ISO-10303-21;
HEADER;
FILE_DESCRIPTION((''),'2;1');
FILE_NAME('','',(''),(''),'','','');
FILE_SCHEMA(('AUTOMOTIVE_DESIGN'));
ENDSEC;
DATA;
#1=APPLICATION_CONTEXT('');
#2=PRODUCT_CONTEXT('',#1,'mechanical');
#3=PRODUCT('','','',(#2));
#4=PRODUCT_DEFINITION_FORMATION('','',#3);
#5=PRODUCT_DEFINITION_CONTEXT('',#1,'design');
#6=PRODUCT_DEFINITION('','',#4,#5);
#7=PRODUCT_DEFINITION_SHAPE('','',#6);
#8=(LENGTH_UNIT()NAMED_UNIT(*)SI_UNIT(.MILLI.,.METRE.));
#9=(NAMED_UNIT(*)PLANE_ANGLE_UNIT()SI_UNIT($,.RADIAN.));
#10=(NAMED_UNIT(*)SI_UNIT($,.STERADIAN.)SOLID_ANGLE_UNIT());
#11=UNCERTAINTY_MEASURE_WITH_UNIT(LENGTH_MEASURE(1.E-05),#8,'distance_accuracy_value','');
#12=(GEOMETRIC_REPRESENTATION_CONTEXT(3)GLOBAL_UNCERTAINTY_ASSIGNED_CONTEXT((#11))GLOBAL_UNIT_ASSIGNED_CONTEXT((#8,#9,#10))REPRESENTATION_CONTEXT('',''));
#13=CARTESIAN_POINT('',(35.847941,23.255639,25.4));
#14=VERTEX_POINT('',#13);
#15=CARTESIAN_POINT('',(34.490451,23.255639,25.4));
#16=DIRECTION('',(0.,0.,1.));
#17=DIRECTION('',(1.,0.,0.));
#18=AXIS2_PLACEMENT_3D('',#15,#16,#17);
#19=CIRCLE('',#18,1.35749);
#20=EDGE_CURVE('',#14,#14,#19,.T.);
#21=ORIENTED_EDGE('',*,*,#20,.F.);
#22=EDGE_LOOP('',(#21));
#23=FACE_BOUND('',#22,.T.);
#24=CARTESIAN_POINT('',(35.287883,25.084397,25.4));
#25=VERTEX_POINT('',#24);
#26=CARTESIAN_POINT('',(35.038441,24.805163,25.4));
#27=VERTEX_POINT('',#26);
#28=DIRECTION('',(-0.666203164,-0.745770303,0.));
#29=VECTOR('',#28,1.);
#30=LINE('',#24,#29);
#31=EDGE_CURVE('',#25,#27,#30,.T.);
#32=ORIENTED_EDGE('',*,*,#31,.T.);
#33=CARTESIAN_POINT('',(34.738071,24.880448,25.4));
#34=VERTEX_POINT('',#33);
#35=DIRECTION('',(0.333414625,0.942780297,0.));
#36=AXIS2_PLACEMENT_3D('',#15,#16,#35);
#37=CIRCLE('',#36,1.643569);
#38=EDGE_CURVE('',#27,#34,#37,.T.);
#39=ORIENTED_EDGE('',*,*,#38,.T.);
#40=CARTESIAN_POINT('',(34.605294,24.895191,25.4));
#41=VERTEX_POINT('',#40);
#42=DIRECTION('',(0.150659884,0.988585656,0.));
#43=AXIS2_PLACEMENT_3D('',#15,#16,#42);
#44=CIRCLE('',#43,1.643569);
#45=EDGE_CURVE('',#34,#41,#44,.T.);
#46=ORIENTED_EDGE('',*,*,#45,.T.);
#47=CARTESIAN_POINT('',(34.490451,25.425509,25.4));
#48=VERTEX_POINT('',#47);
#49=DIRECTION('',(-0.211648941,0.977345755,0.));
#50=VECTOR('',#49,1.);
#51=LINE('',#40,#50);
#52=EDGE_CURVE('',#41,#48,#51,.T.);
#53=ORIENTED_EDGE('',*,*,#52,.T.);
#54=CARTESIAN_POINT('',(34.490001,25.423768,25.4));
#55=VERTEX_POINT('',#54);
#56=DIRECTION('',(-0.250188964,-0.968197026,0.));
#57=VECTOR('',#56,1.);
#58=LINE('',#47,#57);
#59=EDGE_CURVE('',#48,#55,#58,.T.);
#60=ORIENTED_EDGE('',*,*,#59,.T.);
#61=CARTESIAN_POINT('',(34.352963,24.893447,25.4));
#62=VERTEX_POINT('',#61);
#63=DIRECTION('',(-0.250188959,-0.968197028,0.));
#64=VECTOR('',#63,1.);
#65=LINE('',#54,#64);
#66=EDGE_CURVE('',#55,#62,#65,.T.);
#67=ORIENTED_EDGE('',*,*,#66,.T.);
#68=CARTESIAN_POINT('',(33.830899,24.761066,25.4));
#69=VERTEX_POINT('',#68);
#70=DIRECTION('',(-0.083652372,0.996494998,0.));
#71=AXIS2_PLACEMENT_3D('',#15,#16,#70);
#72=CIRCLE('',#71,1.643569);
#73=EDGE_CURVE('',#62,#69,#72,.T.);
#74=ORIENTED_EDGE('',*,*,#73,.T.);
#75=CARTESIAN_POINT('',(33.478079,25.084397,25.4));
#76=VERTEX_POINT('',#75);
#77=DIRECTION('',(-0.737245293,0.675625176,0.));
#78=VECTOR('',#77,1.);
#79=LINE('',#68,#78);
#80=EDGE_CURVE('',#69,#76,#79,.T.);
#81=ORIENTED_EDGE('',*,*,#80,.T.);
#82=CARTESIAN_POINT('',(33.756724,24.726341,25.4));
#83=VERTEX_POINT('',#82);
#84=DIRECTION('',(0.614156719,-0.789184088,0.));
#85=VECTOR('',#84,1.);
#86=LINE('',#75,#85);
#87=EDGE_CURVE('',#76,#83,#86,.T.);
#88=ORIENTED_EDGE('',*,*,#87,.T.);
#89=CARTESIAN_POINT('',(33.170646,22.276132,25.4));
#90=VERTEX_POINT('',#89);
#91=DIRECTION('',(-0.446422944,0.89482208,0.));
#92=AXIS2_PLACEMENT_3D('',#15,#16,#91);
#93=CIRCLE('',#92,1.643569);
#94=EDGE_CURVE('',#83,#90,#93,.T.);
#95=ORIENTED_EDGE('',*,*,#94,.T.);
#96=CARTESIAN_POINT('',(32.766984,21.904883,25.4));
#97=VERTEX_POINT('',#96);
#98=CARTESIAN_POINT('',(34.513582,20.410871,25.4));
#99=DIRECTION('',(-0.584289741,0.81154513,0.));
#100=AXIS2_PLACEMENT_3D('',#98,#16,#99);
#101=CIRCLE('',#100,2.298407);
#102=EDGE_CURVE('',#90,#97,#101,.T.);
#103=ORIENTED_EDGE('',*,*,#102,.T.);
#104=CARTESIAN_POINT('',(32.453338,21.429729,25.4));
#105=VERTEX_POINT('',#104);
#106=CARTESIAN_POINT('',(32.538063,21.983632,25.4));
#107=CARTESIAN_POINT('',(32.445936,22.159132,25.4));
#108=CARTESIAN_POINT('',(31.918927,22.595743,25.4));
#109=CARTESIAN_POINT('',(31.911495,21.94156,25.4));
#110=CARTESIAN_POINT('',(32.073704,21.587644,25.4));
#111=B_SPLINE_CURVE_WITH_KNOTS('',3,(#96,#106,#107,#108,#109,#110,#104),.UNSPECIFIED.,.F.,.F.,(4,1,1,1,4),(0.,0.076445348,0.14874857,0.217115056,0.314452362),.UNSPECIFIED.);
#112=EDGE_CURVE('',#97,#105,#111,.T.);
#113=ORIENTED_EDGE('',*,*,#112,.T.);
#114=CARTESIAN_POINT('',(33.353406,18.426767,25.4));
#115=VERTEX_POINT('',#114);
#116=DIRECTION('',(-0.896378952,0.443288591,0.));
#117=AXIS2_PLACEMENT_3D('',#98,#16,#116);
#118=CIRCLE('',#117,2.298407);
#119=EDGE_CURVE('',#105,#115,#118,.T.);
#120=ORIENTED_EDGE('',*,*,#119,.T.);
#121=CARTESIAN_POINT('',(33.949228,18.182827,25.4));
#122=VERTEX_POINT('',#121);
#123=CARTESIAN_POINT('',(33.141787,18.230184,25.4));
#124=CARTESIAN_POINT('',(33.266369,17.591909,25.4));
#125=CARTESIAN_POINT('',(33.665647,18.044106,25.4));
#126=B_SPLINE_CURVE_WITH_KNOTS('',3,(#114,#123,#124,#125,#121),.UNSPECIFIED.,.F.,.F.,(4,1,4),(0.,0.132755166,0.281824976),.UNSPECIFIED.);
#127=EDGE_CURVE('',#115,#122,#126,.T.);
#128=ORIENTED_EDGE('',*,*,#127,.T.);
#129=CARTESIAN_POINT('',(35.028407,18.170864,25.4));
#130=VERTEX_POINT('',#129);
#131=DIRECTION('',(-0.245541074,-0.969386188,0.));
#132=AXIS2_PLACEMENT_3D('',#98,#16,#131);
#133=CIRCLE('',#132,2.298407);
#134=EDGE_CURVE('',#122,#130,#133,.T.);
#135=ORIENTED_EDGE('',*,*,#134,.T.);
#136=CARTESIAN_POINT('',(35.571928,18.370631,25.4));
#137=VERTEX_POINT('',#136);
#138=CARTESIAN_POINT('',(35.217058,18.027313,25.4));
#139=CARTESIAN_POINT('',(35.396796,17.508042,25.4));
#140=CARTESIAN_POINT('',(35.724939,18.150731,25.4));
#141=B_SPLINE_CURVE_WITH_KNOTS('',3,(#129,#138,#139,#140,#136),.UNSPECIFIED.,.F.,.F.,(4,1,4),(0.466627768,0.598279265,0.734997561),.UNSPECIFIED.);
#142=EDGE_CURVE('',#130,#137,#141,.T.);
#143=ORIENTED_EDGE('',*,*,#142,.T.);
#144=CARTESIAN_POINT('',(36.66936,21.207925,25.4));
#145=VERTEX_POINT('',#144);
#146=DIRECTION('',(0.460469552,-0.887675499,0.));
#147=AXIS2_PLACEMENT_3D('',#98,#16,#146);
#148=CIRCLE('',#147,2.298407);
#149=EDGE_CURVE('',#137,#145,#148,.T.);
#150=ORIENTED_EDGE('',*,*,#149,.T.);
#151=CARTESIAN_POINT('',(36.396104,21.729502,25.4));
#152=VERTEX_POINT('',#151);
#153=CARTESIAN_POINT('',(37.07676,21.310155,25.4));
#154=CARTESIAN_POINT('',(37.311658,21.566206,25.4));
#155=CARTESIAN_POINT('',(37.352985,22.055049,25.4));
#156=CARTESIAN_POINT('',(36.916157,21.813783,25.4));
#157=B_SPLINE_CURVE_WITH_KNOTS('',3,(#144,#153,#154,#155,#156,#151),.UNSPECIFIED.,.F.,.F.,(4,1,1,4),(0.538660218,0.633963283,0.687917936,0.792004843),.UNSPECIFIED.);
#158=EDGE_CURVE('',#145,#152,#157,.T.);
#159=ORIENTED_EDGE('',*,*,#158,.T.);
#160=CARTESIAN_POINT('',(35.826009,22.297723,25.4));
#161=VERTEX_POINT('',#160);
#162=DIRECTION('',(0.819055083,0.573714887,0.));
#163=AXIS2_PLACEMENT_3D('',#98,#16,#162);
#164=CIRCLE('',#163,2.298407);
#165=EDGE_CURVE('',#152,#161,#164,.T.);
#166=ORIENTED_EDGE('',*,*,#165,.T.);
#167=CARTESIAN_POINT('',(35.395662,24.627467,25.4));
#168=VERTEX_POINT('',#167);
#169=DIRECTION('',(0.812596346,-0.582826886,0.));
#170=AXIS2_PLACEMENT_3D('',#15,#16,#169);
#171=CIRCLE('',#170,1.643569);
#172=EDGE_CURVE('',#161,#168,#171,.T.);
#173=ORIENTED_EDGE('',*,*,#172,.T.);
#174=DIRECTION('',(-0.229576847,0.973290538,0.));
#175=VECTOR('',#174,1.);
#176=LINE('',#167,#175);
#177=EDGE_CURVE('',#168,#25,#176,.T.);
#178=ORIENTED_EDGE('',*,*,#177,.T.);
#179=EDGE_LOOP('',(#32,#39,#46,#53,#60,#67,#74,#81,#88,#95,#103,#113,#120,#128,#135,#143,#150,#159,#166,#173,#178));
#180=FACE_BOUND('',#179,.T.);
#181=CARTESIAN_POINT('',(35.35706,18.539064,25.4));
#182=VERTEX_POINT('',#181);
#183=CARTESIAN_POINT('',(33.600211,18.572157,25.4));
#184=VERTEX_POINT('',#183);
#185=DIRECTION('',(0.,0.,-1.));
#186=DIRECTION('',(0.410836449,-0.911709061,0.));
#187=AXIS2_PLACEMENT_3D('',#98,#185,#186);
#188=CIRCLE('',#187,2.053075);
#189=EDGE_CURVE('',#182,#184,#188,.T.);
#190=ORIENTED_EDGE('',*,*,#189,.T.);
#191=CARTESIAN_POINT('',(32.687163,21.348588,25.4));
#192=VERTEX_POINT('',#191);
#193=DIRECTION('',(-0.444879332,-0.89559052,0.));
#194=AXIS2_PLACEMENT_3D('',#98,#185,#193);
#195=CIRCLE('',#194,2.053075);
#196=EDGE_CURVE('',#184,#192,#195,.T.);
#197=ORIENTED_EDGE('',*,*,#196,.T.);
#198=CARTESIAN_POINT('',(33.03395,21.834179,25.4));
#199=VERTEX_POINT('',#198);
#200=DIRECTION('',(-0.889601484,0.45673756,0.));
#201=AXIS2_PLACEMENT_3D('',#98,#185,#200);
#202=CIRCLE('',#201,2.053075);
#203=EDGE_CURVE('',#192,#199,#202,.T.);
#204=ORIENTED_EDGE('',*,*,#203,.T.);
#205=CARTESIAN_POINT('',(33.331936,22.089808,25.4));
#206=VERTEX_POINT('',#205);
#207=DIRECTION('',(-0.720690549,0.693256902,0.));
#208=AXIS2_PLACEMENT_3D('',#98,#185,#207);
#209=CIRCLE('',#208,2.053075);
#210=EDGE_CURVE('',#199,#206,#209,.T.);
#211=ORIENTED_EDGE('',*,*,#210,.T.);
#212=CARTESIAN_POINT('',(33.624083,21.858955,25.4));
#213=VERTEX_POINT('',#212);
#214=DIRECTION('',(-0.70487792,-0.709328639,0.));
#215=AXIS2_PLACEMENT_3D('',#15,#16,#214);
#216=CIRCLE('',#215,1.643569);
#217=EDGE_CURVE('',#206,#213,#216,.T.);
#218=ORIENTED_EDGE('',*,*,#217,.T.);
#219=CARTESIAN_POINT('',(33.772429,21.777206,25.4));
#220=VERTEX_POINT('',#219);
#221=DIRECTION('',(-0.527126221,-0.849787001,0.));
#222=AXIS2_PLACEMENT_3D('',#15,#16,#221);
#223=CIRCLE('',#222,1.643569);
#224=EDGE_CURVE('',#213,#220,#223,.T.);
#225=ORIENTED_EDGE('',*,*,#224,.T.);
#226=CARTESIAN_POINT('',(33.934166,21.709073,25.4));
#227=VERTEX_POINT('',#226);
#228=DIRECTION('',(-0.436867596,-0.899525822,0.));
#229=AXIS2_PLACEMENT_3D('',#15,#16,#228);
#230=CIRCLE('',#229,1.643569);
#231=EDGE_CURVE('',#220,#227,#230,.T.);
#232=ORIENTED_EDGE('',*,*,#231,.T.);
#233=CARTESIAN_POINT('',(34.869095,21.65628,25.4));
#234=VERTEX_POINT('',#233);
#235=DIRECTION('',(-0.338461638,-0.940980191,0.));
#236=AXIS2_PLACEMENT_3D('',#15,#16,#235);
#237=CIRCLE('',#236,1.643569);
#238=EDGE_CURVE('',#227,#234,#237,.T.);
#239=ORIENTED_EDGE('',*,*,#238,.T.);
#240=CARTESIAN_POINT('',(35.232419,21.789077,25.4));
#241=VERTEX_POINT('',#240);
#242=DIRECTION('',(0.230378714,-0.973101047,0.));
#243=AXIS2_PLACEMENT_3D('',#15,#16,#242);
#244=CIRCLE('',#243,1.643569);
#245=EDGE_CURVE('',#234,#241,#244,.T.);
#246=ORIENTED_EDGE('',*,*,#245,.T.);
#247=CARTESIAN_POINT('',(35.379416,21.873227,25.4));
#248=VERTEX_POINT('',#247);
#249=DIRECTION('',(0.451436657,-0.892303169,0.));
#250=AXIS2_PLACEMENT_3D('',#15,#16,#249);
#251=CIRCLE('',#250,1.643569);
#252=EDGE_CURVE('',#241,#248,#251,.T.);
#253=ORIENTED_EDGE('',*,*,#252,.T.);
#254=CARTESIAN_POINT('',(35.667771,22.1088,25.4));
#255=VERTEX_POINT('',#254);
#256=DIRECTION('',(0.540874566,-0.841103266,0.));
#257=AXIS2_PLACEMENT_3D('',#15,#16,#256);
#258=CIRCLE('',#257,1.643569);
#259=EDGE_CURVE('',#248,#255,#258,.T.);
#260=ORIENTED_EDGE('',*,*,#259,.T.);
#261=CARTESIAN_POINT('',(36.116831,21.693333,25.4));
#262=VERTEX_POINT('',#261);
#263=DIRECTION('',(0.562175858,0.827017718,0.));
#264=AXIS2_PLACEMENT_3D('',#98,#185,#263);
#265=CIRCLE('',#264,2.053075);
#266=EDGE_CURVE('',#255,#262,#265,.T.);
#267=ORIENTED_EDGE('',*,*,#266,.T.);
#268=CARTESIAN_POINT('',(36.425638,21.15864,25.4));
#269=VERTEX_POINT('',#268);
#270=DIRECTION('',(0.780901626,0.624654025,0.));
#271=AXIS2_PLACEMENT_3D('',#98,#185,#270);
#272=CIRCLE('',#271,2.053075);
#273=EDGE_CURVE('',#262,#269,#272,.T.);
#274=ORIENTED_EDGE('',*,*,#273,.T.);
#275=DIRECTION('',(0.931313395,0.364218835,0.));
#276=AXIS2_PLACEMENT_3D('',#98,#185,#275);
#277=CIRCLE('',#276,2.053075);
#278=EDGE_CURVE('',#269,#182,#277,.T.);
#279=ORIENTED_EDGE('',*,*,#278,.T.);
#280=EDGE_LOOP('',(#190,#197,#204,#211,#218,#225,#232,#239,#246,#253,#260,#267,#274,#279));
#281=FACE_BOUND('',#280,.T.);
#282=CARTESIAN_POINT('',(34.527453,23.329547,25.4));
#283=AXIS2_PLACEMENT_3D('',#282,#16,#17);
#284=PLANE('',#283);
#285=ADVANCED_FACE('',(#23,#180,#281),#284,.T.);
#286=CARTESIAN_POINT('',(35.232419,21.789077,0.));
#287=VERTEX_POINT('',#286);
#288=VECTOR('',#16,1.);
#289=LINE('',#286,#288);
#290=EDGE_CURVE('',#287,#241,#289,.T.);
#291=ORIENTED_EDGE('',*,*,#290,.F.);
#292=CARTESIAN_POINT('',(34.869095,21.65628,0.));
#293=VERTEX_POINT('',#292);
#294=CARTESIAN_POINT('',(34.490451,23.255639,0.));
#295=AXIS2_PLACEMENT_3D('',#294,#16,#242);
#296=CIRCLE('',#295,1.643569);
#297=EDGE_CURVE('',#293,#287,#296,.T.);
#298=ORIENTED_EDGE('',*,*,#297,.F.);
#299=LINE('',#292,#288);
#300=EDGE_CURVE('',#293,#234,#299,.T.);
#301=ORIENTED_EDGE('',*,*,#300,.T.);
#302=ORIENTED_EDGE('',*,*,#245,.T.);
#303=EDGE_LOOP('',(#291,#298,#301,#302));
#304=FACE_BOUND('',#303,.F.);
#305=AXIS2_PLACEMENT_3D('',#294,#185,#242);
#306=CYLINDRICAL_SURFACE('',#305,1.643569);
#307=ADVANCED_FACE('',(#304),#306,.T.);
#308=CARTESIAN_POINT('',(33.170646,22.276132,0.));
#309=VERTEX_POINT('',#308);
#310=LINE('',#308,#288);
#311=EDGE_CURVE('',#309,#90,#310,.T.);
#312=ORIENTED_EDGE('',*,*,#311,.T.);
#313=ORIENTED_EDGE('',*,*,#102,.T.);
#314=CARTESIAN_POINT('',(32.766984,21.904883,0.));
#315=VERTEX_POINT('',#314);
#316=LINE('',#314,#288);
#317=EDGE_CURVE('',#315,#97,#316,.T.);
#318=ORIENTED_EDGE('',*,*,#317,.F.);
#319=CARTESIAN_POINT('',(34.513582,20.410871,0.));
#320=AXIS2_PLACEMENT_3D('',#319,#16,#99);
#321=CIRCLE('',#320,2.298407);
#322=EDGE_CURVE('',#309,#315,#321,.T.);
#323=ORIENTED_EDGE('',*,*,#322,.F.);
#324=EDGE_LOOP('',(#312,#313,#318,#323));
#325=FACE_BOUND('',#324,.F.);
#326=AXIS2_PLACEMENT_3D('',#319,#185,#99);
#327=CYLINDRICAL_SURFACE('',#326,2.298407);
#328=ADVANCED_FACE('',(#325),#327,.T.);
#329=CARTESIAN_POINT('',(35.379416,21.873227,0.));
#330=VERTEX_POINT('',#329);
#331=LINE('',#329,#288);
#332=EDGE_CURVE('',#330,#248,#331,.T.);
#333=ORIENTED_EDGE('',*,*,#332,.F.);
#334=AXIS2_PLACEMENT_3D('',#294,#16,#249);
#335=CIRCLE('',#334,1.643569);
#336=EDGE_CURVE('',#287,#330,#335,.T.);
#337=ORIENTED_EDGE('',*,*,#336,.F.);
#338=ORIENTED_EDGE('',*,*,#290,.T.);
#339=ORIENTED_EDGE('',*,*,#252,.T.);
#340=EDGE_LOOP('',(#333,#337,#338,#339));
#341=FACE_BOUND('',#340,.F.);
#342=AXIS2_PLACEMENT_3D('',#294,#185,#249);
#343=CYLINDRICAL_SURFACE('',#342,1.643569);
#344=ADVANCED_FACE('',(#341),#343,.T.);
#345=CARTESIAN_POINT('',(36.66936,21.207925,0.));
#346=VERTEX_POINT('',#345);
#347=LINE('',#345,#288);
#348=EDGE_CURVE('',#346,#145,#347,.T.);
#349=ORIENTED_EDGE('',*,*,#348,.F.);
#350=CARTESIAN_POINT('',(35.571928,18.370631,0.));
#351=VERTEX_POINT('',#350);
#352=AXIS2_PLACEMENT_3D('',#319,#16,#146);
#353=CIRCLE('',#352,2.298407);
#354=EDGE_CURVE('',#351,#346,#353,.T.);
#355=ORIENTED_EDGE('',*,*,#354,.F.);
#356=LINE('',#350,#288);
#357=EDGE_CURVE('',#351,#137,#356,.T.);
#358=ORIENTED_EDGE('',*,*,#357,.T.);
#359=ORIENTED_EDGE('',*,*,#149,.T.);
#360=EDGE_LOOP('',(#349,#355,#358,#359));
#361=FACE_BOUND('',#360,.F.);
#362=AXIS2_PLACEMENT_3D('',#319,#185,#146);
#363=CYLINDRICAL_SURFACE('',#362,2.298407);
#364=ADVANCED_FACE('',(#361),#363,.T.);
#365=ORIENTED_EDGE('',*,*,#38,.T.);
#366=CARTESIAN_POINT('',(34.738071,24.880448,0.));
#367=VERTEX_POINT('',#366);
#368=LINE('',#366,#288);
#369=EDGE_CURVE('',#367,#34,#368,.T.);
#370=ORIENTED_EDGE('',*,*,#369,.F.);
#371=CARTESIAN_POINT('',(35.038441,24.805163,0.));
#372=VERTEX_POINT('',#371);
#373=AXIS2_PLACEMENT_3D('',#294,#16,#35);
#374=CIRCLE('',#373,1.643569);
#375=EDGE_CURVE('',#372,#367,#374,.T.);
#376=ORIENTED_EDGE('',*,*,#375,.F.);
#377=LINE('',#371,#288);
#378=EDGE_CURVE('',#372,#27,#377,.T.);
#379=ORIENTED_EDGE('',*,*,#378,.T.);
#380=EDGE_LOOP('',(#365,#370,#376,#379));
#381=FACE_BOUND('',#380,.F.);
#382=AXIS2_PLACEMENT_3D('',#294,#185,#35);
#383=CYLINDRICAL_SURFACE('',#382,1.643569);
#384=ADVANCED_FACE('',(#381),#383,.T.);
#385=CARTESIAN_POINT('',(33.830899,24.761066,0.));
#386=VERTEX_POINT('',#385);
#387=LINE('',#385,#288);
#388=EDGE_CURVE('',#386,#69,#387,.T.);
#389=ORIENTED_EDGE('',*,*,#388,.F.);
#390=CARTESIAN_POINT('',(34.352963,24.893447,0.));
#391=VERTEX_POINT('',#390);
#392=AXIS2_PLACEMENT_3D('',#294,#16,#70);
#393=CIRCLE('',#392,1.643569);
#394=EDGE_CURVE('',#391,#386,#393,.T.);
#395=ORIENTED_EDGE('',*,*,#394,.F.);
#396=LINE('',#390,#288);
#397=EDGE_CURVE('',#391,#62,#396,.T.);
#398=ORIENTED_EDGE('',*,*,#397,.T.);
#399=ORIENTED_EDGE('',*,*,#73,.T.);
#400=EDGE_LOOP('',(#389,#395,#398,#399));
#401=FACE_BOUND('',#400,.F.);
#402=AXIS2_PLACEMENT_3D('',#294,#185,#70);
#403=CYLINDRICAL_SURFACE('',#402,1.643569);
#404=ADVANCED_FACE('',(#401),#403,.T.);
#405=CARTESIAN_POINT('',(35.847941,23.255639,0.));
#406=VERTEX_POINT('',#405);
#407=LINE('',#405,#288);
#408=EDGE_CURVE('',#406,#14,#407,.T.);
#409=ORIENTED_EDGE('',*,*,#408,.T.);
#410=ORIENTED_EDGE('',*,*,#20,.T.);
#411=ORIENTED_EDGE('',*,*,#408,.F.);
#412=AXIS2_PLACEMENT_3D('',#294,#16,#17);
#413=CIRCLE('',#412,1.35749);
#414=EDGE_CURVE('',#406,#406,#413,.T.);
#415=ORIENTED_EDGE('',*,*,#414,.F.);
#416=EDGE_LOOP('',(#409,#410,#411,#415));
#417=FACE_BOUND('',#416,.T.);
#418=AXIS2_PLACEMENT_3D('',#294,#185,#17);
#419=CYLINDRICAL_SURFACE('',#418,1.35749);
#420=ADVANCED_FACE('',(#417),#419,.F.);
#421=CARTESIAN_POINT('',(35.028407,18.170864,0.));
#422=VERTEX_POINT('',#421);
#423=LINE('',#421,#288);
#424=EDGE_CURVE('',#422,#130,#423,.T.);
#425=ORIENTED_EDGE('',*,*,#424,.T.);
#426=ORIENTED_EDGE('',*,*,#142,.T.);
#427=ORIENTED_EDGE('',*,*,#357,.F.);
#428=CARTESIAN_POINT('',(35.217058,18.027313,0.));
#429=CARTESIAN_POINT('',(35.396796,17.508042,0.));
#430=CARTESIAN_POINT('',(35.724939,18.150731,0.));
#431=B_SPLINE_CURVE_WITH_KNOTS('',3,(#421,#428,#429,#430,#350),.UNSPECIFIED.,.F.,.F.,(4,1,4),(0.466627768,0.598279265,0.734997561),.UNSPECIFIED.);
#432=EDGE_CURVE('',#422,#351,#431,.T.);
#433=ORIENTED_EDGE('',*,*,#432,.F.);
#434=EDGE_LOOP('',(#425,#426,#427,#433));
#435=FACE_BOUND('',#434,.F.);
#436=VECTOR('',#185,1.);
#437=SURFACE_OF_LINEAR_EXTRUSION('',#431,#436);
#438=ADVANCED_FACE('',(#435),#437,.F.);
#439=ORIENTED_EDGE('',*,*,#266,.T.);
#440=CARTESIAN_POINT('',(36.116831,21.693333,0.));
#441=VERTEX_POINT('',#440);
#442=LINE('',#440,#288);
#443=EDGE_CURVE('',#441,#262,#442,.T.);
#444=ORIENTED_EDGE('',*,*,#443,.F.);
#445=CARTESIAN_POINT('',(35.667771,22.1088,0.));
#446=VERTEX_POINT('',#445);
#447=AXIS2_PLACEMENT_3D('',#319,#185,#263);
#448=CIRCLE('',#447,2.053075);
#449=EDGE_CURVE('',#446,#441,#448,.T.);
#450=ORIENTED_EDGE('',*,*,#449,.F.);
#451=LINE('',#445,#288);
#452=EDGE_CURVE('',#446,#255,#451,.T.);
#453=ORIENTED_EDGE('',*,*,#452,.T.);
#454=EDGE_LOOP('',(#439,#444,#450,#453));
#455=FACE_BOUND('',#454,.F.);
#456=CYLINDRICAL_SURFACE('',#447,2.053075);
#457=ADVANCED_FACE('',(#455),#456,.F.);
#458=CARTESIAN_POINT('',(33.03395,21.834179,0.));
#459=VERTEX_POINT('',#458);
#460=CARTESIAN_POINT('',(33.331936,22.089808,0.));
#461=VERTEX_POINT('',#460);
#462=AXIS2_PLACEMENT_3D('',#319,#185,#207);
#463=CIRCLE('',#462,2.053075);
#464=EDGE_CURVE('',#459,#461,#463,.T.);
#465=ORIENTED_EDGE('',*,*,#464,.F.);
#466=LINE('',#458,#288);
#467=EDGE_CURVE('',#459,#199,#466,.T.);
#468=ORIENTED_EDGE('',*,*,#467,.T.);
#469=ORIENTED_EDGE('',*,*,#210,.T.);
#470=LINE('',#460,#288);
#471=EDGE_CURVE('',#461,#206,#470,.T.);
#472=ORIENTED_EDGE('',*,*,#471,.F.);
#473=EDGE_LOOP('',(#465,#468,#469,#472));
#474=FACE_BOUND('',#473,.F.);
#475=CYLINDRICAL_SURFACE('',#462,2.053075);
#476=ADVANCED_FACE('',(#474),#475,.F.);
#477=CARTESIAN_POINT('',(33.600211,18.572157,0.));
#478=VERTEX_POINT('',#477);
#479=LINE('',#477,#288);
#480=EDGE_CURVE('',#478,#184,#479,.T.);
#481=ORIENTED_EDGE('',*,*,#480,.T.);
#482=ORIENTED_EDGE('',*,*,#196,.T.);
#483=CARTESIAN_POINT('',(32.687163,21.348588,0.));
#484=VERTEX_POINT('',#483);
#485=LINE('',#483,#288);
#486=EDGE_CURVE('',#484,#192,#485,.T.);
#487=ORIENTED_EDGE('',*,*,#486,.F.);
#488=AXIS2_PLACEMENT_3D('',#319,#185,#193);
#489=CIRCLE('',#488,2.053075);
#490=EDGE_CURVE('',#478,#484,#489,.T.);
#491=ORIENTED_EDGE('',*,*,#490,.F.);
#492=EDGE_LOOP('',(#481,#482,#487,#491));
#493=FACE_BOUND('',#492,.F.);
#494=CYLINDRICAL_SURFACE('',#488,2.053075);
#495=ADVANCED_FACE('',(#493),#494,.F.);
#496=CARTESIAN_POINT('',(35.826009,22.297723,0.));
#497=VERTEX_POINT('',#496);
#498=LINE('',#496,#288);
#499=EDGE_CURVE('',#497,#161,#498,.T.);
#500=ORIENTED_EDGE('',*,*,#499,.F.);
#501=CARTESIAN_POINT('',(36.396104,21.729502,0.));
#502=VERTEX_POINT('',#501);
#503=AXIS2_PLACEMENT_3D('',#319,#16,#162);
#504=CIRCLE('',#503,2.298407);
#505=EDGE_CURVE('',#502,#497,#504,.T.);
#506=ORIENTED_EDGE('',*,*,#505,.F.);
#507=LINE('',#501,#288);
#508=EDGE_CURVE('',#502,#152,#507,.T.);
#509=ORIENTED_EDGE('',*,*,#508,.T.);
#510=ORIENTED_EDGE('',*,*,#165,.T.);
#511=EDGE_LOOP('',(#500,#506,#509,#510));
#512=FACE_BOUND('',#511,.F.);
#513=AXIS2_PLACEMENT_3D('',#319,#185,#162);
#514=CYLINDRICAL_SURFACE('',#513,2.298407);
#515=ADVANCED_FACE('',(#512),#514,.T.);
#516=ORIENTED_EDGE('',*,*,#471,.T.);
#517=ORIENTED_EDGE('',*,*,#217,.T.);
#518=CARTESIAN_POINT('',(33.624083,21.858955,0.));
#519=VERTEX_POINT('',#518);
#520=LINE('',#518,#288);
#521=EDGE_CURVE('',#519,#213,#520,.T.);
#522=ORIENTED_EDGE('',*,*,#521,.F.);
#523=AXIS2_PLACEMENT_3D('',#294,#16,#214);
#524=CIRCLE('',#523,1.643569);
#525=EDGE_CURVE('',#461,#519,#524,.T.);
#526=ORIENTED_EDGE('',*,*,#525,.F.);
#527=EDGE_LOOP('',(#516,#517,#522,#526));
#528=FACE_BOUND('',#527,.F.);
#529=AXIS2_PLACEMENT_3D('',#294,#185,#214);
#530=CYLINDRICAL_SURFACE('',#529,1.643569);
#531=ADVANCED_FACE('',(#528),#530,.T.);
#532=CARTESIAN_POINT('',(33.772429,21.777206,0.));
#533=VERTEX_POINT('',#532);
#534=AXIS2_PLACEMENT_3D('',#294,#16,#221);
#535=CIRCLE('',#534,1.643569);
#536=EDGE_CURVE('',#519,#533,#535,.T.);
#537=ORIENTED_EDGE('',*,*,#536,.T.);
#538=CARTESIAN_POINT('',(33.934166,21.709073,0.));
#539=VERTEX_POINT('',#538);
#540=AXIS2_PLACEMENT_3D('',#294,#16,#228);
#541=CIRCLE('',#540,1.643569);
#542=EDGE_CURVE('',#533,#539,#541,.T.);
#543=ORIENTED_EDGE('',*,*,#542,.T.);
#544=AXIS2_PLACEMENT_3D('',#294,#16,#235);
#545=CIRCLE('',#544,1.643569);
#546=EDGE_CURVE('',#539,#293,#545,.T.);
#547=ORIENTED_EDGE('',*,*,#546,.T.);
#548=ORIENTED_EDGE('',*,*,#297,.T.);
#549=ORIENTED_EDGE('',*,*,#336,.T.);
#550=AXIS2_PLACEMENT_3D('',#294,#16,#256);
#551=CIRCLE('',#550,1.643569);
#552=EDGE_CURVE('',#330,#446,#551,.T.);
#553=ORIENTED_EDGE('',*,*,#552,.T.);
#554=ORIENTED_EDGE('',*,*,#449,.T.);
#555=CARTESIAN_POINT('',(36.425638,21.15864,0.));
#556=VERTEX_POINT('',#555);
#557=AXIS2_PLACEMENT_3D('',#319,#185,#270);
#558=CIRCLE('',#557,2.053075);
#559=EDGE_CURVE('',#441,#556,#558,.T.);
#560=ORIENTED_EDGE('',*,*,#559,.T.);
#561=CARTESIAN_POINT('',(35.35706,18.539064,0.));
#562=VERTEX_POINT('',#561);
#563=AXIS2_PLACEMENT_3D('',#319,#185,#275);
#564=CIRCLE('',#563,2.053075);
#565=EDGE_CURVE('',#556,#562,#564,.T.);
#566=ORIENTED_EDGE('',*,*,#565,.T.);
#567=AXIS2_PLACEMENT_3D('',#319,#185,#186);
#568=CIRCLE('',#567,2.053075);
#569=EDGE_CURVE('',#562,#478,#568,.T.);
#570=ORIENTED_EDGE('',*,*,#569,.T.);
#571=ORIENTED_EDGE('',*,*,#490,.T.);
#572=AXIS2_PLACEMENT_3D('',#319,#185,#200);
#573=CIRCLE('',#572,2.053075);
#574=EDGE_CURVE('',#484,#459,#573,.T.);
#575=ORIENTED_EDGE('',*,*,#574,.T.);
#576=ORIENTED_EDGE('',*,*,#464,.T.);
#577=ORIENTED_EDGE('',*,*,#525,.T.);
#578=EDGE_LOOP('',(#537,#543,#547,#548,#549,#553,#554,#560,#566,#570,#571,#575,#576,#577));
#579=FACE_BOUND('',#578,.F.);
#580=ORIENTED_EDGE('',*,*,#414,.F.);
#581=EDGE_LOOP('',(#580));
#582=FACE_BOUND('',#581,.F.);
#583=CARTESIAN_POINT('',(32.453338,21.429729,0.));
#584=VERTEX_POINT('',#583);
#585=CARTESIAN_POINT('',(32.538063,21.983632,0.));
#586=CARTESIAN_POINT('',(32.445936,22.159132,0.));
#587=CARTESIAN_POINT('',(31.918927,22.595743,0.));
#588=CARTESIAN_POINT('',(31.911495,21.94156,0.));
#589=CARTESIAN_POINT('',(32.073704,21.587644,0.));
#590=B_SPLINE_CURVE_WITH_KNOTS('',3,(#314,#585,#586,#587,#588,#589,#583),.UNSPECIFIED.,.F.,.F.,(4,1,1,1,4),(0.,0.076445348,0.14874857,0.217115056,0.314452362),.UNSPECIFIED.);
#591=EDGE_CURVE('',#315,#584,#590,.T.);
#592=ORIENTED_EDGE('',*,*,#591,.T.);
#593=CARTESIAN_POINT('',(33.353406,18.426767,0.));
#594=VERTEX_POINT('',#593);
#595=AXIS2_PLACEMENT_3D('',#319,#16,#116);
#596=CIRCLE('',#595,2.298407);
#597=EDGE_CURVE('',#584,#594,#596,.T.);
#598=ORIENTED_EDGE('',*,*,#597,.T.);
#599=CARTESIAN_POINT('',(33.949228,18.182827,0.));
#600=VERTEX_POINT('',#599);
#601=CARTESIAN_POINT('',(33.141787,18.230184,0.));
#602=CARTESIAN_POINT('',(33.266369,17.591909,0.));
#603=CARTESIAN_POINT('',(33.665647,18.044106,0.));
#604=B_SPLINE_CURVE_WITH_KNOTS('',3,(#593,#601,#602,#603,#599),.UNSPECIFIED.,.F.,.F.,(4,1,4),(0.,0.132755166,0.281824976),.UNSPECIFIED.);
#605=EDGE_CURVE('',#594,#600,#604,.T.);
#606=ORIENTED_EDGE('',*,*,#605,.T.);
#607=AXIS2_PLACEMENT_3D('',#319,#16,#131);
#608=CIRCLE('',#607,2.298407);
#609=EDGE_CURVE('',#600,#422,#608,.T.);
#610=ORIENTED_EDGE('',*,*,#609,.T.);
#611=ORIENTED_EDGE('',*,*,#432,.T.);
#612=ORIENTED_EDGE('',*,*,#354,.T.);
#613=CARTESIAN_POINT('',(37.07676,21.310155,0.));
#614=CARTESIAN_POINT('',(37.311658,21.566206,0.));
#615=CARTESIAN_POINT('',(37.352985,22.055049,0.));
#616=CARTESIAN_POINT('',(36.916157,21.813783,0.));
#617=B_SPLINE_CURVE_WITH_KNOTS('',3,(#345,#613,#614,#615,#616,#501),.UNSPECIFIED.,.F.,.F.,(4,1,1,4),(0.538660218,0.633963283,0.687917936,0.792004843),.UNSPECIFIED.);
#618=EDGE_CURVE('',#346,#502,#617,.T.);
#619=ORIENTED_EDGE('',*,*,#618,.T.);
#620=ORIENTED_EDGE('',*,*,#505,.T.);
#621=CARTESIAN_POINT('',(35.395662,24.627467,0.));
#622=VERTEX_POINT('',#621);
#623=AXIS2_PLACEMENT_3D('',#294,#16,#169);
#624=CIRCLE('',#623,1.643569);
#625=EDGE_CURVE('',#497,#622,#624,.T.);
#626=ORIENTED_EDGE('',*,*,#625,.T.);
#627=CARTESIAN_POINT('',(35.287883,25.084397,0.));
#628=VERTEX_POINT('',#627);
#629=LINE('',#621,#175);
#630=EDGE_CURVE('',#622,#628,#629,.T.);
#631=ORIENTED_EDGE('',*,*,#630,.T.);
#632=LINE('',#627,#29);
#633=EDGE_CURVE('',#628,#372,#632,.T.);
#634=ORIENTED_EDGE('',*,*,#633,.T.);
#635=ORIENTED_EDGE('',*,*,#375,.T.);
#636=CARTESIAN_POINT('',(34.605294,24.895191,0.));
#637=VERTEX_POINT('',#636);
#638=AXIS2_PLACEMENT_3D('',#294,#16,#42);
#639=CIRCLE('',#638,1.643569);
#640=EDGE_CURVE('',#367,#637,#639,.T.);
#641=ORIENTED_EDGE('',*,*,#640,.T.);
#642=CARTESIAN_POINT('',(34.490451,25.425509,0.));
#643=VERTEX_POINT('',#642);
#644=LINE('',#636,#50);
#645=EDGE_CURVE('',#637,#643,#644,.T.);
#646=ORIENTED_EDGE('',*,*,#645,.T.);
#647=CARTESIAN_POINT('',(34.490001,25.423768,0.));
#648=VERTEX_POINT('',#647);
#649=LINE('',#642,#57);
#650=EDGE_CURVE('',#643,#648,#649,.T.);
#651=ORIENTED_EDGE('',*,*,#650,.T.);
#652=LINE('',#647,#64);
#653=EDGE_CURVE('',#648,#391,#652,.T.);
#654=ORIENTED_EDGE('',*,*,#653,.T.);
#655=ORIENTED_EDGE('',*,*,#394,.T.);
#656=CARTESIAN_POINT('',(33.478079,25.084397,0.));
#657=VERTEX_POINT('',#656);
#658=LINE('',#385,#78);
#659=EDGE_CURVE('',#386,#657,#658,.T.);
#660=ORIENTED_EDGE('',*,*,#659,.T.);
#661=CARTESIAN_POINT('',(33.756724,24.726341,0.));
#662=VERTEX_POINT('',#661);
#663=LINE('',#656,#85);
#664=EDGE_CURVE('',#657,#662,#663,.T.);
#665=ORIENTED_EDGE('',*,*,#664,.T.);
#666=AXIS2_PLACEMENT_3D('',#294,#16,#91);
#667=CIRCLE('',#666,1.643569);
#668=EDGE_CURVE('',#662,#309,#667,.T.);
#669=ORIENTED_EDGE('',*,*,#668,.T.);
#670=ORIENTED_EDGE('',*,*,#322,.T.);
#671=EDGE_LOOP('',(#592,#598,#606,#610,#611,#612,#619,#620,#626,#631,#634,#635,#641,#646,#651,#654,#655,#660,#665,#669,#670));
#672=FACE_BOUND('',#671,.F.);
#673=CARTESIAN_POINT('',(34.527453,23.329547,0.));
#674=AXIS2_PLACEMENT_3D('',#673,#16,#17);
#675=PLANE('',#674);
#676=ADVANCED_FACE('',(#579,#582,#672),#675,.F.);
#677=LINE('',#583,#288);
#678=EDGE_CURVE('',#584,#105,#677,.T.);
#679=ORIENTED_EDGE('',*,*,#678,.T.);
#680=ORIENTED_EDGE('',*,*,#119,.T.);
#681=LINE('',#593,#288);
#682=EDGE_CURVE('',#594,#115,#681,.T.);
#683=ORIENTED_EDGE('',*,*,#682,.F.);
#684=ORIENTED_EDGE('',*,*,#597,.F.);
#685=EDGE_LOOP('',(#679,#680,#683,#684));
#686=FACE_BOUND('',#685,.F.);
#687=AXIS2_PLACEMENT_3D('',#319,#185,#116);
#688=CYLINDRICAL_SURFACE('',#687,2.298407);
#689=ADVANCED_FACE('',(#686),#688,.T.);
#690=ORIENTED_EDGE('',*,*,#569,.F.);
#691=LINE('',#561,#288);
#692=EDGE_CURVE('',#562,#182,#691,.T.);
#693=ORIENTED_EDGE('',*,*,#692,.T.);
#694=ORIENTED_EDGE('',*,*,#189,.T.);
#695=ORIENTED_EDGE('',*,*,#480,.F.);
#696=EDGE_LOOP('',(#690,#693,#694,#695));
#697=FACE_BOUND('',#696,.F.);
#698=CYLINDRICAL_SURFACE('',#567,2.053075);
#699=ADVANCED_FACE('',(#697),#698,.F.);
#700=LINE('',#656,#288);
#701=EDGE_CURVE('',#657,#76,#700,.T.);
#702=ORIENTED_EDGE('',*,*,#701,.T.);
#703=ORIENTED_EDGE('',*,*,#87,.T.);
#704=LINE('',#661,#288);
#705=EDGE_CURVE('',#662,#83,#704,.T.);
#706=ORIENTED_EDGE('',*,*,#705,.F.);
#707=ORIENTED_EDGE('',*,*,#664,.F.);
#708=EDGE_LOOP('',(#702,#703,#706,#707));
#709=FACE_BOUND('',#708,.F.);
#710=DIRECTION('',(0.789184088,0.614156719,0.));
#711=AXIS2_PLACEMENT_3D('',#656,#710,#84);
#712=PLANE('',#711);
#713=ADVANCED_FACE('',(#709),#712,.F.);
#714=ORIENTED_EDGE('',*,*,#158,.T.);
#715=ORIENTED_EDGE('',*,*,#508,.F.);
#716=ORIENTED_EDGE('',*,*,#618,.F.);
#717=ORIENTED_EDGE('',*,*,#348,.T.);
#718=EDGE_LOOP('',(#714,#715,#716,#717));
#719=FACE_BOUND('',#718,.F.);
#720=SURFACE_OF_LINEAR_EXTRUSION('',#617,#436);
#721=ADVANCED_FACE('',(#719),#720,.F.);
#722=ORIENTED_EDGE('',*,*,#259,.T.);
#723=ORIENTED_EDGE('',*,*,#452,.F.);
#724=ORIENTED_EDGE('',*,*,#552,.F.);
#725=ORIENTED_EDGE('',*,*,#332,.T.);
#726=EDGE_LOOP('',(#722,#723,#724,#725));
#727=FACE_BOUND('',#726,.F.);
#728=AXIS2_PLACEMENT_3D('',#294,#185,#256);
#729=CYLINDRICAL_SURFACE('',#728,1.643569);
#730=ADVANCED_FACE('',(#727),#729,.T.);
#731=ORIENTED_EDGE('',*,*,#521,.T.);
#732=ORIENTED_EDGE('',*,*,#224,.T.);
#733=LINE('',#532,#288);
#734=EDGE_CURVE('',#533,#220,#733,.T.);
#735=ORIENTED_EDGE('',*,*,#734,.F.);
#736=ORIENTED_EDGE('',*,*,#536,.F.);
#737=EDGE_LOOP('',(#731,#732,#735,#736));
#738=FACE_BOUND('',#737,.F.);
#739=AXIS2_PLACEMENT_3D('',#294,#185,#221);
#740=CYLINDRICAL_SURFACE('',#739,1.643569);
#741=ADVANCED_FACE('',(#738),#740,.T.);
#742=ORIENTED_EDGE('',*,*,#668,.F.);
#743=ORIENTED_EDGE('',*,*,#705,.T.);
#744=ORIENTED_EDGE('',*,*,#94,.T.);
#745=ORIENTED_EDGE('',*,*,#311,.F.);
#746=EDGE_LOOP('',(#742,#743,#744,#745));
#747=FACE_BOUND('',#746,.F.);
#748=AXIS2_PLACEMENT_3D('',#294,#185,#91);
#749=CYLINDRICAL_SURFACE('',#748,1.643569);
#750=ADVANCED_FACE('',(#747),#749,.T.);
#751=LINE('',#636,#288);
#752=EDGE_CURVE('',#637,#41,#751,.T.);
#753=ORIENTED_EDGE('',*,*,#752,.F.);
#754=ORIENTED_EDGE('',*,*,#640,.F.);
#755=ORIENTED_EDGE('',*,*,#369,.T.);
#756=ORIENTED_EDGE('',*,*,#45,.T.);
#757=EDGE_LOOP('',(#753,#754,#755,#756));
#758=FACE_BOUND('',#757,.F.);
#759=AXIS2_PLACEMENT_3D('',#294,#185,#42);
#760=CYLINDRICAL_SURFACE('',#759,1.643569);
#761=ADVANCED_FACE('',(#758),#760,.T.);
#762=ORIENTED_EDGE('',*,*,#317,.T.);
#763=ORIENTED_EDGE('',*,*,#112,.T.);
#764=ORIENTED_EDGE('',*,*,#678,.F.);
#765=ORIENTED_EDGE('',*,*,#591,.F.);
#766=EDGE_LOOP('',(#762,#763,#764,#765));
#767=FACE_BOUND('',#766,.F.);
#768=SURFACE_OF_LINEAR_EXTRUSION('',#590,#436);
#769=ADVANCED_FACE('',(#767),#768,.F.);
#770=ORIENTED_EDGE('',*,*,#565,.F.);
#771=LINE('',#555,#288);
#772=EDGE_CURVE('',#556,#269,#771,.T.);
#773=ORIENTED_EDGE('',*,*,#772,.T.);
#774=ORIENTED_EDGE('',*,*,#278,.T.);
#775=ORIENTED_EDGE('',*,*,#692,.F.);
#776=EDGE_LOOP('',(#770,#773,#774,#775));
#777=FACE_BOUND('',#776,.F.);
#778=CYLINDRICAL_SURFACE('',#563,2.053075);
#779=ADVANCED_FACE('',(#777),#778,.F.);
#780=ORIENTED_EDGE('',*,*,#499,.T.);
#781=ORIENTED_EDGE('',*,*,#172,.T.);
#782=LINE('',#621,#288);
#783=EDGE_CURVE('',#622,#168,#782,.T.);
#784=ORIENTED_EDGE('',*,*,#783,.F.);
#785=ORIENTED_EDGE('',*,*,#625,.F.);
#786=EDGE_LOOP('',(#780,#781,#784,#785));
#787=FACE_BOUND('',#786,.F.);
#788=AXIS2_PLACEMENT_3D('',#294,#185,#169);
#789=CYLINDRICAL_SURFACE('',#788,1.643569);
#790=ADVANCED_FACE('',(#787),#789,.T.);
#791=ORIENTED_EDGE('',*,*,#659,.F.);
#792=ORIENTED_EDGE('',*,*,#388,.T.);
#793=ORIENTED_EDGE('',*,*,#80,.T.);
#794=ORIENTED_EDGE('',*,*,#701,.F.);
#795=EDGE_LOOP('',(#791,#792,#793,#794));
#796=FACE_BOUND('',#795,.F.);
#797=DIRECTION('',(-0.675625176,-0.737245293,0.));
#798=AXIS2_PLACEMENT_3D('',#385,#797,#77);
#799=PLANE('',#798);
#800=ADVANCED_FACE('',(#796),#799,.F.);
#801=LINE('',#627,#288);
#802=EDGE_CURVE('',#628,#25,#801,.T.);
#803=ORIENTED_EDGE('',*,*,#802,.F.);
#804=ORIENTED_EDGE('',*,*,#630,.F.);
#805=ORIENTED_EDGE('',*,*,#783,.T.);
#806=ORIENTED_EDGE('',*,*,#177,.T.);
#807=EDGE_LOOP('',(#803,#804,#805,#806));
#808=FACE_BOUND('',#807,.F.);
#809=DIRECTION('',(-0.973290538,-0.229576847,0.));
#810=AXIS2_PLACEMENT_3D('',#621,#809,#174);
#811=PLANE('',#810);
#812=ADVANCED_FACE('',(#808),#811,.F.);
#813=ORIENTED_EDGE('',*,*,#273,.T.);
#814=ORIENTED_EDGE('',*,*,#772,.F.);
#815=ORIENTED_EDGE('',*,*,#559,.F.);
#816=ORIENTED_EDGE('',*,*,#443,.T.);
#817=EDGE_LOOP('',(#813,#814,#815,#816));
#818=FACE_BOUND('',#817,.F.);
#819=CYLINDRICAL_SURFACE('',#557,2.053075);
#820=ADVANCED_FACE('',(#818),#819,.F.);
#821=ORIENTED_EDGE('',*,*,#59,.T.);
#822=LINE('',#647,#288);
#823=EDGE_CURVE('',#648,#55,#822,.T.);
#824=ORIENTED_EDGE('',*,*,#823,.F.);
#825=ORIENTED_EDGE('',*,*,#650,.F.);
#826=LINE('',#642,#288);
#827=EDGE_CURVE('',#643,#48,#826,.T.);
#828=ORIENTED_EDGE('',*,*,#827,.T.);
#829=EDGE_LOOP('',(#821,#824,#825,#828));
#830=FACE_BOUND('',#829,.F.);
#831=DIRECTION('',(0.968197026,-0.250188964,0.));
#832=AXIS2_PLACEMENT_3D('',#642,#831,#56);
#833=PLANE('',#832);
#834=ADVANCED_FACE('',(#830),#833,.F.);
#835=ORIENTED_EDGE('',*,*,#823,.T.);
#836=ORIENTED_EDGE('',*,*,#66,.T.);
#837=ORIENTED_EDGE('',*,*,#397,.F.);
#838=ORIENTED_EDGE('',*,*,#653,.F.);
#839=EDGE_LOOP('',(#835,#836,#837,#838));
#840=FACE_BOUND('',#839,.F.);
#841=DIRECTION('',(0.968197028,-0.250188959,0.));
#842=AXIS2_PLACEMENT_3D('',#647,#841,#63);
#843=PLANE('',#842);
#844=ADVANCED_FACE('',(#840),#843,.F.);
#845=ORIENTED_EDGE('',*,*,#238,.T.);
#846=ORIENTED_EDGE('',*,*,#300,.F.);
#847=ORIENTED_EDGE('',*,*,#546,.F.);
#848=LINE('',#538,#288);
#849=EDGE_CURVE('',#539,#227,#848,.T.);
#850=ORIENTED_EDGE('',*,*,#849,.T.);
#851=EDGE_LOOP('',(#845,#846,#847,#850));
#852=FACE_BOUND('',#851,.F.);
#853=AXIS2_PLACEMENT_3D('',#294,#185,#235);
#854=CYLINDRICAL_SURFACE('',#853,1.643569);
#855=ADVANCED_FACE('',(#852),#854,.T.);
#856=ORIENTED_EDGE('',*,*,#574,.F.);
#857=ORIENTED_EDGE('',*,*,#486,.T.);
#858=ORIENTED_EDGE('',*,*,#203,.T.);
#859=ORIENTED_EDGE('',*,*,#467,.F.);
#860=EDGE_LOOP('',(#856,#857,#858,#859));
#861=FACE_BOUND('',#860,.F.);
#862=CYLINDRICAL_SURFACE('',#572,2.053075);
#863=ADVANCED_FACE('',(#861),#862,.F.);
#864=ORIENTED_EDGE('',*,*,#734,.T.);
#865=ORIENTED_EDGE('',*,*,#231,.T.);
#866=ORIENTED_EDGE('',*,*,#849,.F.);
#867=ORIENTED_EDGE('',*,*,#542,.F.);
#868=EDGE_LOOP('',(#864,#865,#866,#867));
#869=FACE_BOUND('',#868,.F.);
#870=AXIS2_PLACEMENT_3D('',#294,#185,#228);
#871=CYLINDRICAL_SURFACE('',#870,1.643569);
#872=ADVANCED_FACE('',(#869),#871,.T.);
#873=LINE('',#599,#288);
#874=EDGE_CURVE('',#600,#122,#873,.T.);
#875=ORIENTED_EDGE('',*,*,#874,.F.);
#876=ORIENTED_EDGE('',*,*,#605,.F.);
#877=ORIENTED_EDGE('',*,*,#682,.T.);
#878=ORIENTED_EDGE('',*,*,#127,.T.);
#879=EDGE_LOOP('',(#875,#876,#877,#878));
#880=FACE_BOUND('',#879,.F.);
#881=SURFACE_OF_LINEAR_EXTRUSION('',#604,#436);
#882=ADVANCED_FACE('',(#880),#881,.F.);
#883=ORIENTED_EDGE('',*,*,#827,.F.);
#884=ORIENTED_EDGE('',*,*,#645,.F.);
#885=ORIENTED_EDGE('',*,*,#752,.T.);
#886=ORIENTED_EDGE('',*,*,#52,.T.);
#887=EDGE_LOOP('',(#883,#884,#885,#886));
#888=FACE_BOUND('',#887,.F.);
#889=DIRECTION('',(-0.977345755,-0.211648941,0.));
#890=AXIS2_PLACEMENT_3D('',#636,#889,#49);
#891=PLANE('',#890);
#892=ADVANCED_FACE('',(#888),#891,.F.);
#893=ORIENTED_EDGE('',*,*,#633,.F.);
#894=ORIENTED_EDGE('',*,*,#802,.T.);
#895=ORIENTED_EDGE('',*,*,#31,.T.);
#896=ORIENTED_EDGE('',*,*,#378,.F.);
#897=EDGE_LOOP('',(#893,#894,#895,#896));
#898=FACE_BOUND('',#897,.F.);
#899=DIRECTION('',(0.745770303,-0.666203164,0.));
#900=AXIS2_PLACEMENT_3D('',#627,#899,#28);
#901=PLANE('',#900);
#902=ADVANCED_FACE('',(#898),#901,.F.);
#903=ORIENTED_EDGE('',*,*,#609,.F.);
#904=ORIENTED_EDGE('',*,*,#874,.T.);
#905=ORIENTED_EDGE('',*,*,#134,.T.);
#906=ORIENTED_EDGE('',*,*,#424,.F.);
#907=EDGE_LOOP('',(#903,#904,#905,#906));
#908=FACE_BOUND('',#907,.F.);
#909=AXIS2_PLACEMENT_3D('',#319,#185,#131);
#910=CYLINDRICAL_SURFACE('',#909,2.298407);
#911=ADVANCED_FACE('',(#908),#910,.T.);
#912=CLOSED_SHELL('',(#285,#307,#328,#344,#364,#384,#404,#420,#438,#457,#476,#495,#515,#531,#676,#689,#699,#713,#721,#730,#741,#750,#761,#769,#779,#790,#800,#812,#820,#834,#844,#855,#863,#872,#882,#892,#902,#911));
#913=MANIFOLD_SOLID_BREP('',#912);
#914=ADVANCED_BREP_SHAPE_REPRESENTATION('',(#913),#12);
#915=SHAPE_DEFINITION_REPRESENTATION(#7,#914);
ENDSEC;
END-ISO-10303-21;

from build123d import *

# Parameters (mm, degrees)
F0_R     = 1.3574899336
F1_DEPTH = 25.4


with BuildPart() as f1:
    # F0 (on Top) → F1 (new body)
    with BuildSketch(Plane.XY):
        with BuildLine():
            Line((35.2878831327, 25.0843970505), (35.0384411812, 24.8051633126))
            ThreePointArc((35.0384411812, 24.8051633126), (34.8900331306, 24.8498952124), (34.7380711454, 24.8804475838))
            ThreePointArc((34.7380711454, 24.8804475838), (34.6718324932, 24.8891687339), (34.6052941294, 24.8951906649))
            ThreePointArc((34.6052941294, 24.8951906649), (34.4790949379, 24.8991686132), (34.3529627664, 24.8934471338))
            ThreePointArc((34.3529627664, 24.8934471338), (34.0864715287, 24.84878651), (33.8308991876, 24.7610657624))
            ThreePointArc((33.8308991876, 24.7610657624), (33.7935953989, 24.7441653158), (33.7567242747, 24.7263406713))
            ThreePointArc((33.7567242747, 24.7263406713), (32.8919741005, 23.6379870392), (33.1706458564, 22.2761322214))
            ThreePointArc((33.1706458564, 22.2761322214), (33.2477936638, 22.1799429615), (33.331935669, 22.0898081689))
            ThreePointArc((33.331935669, 22.0898081689), (33.4714507341, 21.9660817612), (33.624082862, 21.8589551498))
            ThreePointArc((33.624082862, 21.8589551498), (33.6972022109, 21.8161682858), (33.7724291489, 21.7772059613))
            ThreePointArc((33.7724291489, 21.7772059613), (33.8523875779, 21.7409790551), (33.9341661368, 21.7090728424))
            add(Edge.make_bspline(
                [(34.8690945447, 21.6562799961), (34.5503462489, 21.6638848484), (34.2300963573, 21.682290249), (33.9341661368, 21.7090728424)],
                knots=[0.8742249562, 0.8742249562, 0.8742249562, 0.8742249562, 0.9209885647, 0.9209885647, 0.9209885647, 0.9209885647], degree=3))
            ThreePointArc((34.8690945447, 21.6562799961), (35.054677069, 21.7119521289), (35.2324185413, 21.7890768896))
            ThreePointArc((35.2324185413, 21.7890768896), (35.3070019831, 21.8292572971), (35.3794159251, 21.8732274679))
            ThreePointArc((35.3794159251, 21.8732274679), (35.5302859315, 21.982821804), (35.6677706867, 22.1088004507))
            ThreePointArc((35.6677706867, 22.1088004507), (35.7504359225, 22.200291525), (35.826009436, 22.2977225363))
            ThreePointArc((35.826009436, 22.2977225363), (36.1066779775, 23.5541858288), (35.3956624922, 24.6274666939))
            Line((35.3956624922, 24.6274666939), (35.2878831327, 25.0843970505))
        make_face()
        with Locations((34.4904512167, 23.2556387782)):
            Circle(F0_R, mode=Mode.SUBTRACT)
        Polygon((34.4900014006, 25.4237678916), (34.6052941294, 24.8951906649), (34.4904512167, 25.4255086183), align=None)
        with BuildLine():
            ThreePointArc((34.3529627664, 24.8934471338), (34.4790949379, 24.8991686132), (34.6052941294, 24.8951906649))
            Line((34.6052941294, 24.8951906649), (34.4900014006, 25.4237678916))
            Line((34.4900014006, 25.4237678916), (34.3529627664, 24.8934471338))
        make_face()
        with BuildLine():
            ThreePointArc((36.3961035597, 21.729501502), (36.1361243059, 22.0387624609), (35.826009436, 22.2977225363))
            ThreePointArc((35.826009436, 22.2977225363), (35.7504359225, 22.200291525), (35.6677706867, 22.1088004507))
            ThreePointArc((35.6677706867, 22.1088004507), (35.9078628578, 21.9178867809), (36.1168310715, 21.6933326324))
            add(Edge.make_bspline(
                [(36.3961035597, 21.729501502), (36.3090749695, 21.7153973416), (36.2155393433, 21.7033827965), (36.1168310715, 21.6933326324)],
                knots=[0.7920048431, 0.7920048431, 0.7920048431, 0.7920048431, 0.8094233051, 0.8094233051, 0.8094233051, 0.8094233051], degree=3))
        make_face()
        with BuildLine():
            ThreePointArc((33.7567242747, 24.7263406713), (33.7935953989, 24.7441653158), (33.8308991876, 24.7610657624))
            Line((33.8308991876, 24.7610657624), (33.4780786019, 25.0843970505))
            Line((33.4780786019, 25.0843970505), (33.7567242747, 24.7263406713))
        make_face()
        with BuildLine():
            add(Edge.make_bspline(
                [(36.6693598159, 21.2079252289), (37.0767596252, 21.3101548698), (37.3116579362, 21.5662061593), (37.3529850038, 22.0550492964), (36.9161573246, 21.8137832496), (36.3961035597, 21.729501502)],
                knots=[0.5386602181, 0.5386602181, 0.5386602181, 0.5386602181, 0.6339632831, 0.6879179364, 0.7920048431, 0.7920048431, 0.7920048431, 0.7920048431], degree=3))
            add(Edge.make_bspline(
                [(36.3961035597, 21.729501502), (36.3090749695, 21.7153973416), (36.2155393433, 21.7033827965), (36.1168310715, 21.6933326324)],
                knots=[0.7920048431, 0.7920048431, 0.7920048431, 0.7920048431, 0.8094233051, 0.8094233051, 0.8094233051, 0.8094233051], degree=3))
            ThreePointArc((36.1168310715, 21.6933326324), (36.2914503946, 21.437661713), (36.4256376999, 21.1586396813))
            add(Edge.make_bspline(
                [(36.4256376999, 21.1586396813), (36.5143437357, 21.1731050665), (36.5960224931, 21.1895225492), (36.6693598159, 21.2079252289)],
                knots=[0.5215044131, 0.5215044131, 0.5215044131, 0.5215044131, 0.5386602181, 0.5386602181, 0.5386602181, 0.5386602181], degree=3))
        make_face()
        with BuildLine():
            ThreePointArc((35.5719280309, 18.3706314653), (36.65722528, 19.581735003), (36.6693598159, 21.2079252289))
            add(Edge.make_bspline(
                [(36.4256376999, 21.1586396813), (36.5143437357, 21.1731050665), (36.5960224931, 21.1895225492), (36.6693598159, 21.2079252289)],
                knots=[0.5215044131, 0.5215044131, 0.5215044131, 0.5215044131, 0.5386602181, 0.5386602181, 0.5386602181, 0.5386602181], degree=3))
            ThreePointArc((36.4256376999, 21.1586396813), (36.4145776308, 19.6354161553), (35.3570595451, 18.5390641437))
            add(Edge.make_bspline(
                [(35.5719280309, 18.3706314653), (35.5261594748, 18.4364082043), (35.4517435721, 18.492565667), (35.3570595451, 18.5390641437)],
                knots=[0.7349975613, 0.7349975613, 0.7349975613, 0.7349975613, 0.7758927384, 0.7758927384, 0.7758927384, 0.7758927384], degree=3))
        make_face()
        with BuildLine():
            ThreePointArc((33.331935669, 22.0898081689), (33.2477936638, 22.1799429615), (33.1706458564, 22.2761322214))
            ThreePointArc((33.1706458564, 22.2761322214), (32.9577020916, 22.1025904709), (32.7669837029, 21.9048829033))
            add(Edge.make_bspline(
                [(33.0339498666, 21.8341794774), (32.9292845175, 21.856390058), (32.8391193359, 21.8800682788), (32.7669837029, 21.9048829033)],
                knots=[0.9759112078, 0.9759112078, 0.9759112078, 0.9759112078, 1, 1, 1, 1], degree=3))
            ThreePointArc((33.0339498666, 21.8341794774), (33.1768182667, 21.9691331407), (33.331935669, 22.0898081689))
        make_face()
        with BuildLine():
            add(Edge.make_bspline(
                [(35.0284066637, 18.1708643732), (35.2170583716, 18.0273126704), (35.3967964234, 17.5080415665), (35.724938715, 18.1507306273), (35.5719280309, 18.3706314653)],
                knots=[0.4666277679, 0.4666277679, 0.4666277679, 0.4666277679, 0.5982792648, 0.7349975613, 0.7349975613, 0.7349975613, 0.7349975613], degree=3))
            add(Edge.make_bspline(
                [(35.5719280309, 18.3706314653), (35.5261594748, 18.4364082043), (35.4517435721, 18.492565667), (35.3570595451, 18.5390641437)],
                knots=[0.7349975613, 0.7349975613, 0.7349975613, 0.7349975613, 0.7758927384, 0.7758927384, 0.7758927384, 0.7758927384], degree=3))
            ThreePointArc((35.3570595451, 18.5390641437), (34.4749160162, 18.3581603594), (33.6002109549, 18.5721567153))
            add(Edge.make_bspline(
                [(33.6002109549, 18.5721567153), (33.4997142497, 18.532511366), (33.4150808726, 18.4840593538), (33.3534064783, 18.426767052)],
                knots=[0.9613097376, 0.9613097376, 0.9613097376, 0.9613097376, 1, 1, 1, 1], degree=3))
            add(Edge.make_bspline(
                [(33.3534064783, 18.426767052), (33.1417874827, 18.2301840214), (33.2663690261, 17.591909312), (33.6656467439, 18.0441057117), (33.9492281969, 18.1828270385)],
                knots=[0, 0, 0, 0, 0.132755166, 0.2818249758, 0.2818249758, 0.2818249758, 0.2818249758], degree=3))
            add(Edge.make_bspline(
                [(33.9492281969, 18.1828270385), (34.3007859291, 18.3548007502), (34.7635911229, 18.3723718084), (35.0284066637, 18.1708643732)],
                knots=[0.2818249758, 0.2818249758, 0.2818249758, 0.2818249758, 0.4666277679, 0.4666277679, 0.4666277679, 0.4666277679], degree=3))
        make_face()
        with BuildLine():
            add(Edge.make_bspline(
                [(33.0339498666, 21.8341794774), (32.9292845175, 21.856390058), (32.8391193359, 21.8800682788), (32.7669837029, 21.9048829033)],
                knots=[0.9759112078, 0.9759112078, 0.9759112078, 0.9759112078, 1, 1, 1, 1], degree=3))
            add(Edge.make_bspline(
                [(32.7669837029, 21.9048829033), (32.5380625713, 21.9836316671), (32.4459364295, 22.1591315552), (31.9189267871, 22.595742553), (31.9114951341, 21.9415604187), (32.0737037979, 21.5876444724), (32.4533377986, 21.4297287765)],
                knots=[0, 0, 0, 0, 0.0764453478, 0.1487485697, 0.2171150564, 0.3144523622, 0.3144523622, 0.3144523622, 0.3144523622], degree=3))
            add(Edge.make_bspline(
                [(32.4533377986, 21.4297287765), (32.5223607921, 21.4010174018), (32.6007834055, 21.3739582167), (32.6871630664, 21.3485875551)],
                knots=[0.3144523622, 0.3144523622, 0.3144523622, 0.3144523622, 0.3321497028, 0.3321497028, 0.3321497028, 0.3321497028], degree=3))
            ThreePointArc((32.6871630664, 21.3485875551), (32.8428207036, 21.6040495599), (33.0339498666, 21.8341794774))
        make_face()
        with BuildLine():
            ThreePointArc((33.9341661368, 21.7090728424), (34.3977909817, 21.6146837622), (34.8690945447, 21.6562799961))
            add(Edge.make_bspline(
                [(34.8690945447, 21.6562799961), (34.5503462489, 21.6638848484), (34.2300963573, 21.682290249), (33.9341661368, 21.7090728424)],
                knots=[0.8742249562, 0.8742249562, 0.8742249562, 0.8742249562, 0.9209885647, 0.9209885647, 0.9209885647, 0.9209885647], degree=3))
        make_face()
        with BuildLine():
            ThreePointArc((33.9492281969, 18.1828270385), (34.4881053263, 18.1126052324), (35.0284066637, 18.1708643732))
            add(Edge.make_bspline(
                [(33.9492281969, 18.1828270385), (34.3007859291, 18.3548007502), (34.7635911229, 18.3723718084), (35.0284066637, 18.1708643732)],
                knots=[0.2818249758, 0.2818249758, 0.2818249758, 0.2818249758, 0.4666277679, 0.4666277679, 0.4666277679, 0.4666277679], degree=3))
        make_face()
        with BuildLine():
            add(Edge.make_bspline(
                [(32.4533377986, 21.4297287765), (32.5223607921, 21.4010174018), (32.6007834055, 21.3739582167), (32.6871630664, 21.3485875551)],
                knots=[0.3144523622, 0.3144523622, 0.3144523622, 0.3144523622, 0.3321497028, 0.3321497028, 0.3321497028, 0.3321497028], degree=3))
            ThreePointArc((32.4533377986, 21.4297287765), (32.3119414487, 19.7509801737), (33.3534064783, 18.426767052))
            add(Edge.make_bspline(
                [(33.6002109549, 18.5721567153), (33.4997142497, 18.532511366), (33.4150808726, 18.4840593538), (33.3534064783, 18.426767052)],
                knots=[0.9613097376, 0.9613097376, 0.9613097376, 0.9613097376, 1, 1, 1, 1], degree=3))
            ThreePointArc((33.6002109549, 18.5721567153), (32.5632602667, 19.7694949106), (32.6871630664, 21.3485875551))
        make_face()
    extrude(amount=F1_DEPTH)


solid = f1.part
